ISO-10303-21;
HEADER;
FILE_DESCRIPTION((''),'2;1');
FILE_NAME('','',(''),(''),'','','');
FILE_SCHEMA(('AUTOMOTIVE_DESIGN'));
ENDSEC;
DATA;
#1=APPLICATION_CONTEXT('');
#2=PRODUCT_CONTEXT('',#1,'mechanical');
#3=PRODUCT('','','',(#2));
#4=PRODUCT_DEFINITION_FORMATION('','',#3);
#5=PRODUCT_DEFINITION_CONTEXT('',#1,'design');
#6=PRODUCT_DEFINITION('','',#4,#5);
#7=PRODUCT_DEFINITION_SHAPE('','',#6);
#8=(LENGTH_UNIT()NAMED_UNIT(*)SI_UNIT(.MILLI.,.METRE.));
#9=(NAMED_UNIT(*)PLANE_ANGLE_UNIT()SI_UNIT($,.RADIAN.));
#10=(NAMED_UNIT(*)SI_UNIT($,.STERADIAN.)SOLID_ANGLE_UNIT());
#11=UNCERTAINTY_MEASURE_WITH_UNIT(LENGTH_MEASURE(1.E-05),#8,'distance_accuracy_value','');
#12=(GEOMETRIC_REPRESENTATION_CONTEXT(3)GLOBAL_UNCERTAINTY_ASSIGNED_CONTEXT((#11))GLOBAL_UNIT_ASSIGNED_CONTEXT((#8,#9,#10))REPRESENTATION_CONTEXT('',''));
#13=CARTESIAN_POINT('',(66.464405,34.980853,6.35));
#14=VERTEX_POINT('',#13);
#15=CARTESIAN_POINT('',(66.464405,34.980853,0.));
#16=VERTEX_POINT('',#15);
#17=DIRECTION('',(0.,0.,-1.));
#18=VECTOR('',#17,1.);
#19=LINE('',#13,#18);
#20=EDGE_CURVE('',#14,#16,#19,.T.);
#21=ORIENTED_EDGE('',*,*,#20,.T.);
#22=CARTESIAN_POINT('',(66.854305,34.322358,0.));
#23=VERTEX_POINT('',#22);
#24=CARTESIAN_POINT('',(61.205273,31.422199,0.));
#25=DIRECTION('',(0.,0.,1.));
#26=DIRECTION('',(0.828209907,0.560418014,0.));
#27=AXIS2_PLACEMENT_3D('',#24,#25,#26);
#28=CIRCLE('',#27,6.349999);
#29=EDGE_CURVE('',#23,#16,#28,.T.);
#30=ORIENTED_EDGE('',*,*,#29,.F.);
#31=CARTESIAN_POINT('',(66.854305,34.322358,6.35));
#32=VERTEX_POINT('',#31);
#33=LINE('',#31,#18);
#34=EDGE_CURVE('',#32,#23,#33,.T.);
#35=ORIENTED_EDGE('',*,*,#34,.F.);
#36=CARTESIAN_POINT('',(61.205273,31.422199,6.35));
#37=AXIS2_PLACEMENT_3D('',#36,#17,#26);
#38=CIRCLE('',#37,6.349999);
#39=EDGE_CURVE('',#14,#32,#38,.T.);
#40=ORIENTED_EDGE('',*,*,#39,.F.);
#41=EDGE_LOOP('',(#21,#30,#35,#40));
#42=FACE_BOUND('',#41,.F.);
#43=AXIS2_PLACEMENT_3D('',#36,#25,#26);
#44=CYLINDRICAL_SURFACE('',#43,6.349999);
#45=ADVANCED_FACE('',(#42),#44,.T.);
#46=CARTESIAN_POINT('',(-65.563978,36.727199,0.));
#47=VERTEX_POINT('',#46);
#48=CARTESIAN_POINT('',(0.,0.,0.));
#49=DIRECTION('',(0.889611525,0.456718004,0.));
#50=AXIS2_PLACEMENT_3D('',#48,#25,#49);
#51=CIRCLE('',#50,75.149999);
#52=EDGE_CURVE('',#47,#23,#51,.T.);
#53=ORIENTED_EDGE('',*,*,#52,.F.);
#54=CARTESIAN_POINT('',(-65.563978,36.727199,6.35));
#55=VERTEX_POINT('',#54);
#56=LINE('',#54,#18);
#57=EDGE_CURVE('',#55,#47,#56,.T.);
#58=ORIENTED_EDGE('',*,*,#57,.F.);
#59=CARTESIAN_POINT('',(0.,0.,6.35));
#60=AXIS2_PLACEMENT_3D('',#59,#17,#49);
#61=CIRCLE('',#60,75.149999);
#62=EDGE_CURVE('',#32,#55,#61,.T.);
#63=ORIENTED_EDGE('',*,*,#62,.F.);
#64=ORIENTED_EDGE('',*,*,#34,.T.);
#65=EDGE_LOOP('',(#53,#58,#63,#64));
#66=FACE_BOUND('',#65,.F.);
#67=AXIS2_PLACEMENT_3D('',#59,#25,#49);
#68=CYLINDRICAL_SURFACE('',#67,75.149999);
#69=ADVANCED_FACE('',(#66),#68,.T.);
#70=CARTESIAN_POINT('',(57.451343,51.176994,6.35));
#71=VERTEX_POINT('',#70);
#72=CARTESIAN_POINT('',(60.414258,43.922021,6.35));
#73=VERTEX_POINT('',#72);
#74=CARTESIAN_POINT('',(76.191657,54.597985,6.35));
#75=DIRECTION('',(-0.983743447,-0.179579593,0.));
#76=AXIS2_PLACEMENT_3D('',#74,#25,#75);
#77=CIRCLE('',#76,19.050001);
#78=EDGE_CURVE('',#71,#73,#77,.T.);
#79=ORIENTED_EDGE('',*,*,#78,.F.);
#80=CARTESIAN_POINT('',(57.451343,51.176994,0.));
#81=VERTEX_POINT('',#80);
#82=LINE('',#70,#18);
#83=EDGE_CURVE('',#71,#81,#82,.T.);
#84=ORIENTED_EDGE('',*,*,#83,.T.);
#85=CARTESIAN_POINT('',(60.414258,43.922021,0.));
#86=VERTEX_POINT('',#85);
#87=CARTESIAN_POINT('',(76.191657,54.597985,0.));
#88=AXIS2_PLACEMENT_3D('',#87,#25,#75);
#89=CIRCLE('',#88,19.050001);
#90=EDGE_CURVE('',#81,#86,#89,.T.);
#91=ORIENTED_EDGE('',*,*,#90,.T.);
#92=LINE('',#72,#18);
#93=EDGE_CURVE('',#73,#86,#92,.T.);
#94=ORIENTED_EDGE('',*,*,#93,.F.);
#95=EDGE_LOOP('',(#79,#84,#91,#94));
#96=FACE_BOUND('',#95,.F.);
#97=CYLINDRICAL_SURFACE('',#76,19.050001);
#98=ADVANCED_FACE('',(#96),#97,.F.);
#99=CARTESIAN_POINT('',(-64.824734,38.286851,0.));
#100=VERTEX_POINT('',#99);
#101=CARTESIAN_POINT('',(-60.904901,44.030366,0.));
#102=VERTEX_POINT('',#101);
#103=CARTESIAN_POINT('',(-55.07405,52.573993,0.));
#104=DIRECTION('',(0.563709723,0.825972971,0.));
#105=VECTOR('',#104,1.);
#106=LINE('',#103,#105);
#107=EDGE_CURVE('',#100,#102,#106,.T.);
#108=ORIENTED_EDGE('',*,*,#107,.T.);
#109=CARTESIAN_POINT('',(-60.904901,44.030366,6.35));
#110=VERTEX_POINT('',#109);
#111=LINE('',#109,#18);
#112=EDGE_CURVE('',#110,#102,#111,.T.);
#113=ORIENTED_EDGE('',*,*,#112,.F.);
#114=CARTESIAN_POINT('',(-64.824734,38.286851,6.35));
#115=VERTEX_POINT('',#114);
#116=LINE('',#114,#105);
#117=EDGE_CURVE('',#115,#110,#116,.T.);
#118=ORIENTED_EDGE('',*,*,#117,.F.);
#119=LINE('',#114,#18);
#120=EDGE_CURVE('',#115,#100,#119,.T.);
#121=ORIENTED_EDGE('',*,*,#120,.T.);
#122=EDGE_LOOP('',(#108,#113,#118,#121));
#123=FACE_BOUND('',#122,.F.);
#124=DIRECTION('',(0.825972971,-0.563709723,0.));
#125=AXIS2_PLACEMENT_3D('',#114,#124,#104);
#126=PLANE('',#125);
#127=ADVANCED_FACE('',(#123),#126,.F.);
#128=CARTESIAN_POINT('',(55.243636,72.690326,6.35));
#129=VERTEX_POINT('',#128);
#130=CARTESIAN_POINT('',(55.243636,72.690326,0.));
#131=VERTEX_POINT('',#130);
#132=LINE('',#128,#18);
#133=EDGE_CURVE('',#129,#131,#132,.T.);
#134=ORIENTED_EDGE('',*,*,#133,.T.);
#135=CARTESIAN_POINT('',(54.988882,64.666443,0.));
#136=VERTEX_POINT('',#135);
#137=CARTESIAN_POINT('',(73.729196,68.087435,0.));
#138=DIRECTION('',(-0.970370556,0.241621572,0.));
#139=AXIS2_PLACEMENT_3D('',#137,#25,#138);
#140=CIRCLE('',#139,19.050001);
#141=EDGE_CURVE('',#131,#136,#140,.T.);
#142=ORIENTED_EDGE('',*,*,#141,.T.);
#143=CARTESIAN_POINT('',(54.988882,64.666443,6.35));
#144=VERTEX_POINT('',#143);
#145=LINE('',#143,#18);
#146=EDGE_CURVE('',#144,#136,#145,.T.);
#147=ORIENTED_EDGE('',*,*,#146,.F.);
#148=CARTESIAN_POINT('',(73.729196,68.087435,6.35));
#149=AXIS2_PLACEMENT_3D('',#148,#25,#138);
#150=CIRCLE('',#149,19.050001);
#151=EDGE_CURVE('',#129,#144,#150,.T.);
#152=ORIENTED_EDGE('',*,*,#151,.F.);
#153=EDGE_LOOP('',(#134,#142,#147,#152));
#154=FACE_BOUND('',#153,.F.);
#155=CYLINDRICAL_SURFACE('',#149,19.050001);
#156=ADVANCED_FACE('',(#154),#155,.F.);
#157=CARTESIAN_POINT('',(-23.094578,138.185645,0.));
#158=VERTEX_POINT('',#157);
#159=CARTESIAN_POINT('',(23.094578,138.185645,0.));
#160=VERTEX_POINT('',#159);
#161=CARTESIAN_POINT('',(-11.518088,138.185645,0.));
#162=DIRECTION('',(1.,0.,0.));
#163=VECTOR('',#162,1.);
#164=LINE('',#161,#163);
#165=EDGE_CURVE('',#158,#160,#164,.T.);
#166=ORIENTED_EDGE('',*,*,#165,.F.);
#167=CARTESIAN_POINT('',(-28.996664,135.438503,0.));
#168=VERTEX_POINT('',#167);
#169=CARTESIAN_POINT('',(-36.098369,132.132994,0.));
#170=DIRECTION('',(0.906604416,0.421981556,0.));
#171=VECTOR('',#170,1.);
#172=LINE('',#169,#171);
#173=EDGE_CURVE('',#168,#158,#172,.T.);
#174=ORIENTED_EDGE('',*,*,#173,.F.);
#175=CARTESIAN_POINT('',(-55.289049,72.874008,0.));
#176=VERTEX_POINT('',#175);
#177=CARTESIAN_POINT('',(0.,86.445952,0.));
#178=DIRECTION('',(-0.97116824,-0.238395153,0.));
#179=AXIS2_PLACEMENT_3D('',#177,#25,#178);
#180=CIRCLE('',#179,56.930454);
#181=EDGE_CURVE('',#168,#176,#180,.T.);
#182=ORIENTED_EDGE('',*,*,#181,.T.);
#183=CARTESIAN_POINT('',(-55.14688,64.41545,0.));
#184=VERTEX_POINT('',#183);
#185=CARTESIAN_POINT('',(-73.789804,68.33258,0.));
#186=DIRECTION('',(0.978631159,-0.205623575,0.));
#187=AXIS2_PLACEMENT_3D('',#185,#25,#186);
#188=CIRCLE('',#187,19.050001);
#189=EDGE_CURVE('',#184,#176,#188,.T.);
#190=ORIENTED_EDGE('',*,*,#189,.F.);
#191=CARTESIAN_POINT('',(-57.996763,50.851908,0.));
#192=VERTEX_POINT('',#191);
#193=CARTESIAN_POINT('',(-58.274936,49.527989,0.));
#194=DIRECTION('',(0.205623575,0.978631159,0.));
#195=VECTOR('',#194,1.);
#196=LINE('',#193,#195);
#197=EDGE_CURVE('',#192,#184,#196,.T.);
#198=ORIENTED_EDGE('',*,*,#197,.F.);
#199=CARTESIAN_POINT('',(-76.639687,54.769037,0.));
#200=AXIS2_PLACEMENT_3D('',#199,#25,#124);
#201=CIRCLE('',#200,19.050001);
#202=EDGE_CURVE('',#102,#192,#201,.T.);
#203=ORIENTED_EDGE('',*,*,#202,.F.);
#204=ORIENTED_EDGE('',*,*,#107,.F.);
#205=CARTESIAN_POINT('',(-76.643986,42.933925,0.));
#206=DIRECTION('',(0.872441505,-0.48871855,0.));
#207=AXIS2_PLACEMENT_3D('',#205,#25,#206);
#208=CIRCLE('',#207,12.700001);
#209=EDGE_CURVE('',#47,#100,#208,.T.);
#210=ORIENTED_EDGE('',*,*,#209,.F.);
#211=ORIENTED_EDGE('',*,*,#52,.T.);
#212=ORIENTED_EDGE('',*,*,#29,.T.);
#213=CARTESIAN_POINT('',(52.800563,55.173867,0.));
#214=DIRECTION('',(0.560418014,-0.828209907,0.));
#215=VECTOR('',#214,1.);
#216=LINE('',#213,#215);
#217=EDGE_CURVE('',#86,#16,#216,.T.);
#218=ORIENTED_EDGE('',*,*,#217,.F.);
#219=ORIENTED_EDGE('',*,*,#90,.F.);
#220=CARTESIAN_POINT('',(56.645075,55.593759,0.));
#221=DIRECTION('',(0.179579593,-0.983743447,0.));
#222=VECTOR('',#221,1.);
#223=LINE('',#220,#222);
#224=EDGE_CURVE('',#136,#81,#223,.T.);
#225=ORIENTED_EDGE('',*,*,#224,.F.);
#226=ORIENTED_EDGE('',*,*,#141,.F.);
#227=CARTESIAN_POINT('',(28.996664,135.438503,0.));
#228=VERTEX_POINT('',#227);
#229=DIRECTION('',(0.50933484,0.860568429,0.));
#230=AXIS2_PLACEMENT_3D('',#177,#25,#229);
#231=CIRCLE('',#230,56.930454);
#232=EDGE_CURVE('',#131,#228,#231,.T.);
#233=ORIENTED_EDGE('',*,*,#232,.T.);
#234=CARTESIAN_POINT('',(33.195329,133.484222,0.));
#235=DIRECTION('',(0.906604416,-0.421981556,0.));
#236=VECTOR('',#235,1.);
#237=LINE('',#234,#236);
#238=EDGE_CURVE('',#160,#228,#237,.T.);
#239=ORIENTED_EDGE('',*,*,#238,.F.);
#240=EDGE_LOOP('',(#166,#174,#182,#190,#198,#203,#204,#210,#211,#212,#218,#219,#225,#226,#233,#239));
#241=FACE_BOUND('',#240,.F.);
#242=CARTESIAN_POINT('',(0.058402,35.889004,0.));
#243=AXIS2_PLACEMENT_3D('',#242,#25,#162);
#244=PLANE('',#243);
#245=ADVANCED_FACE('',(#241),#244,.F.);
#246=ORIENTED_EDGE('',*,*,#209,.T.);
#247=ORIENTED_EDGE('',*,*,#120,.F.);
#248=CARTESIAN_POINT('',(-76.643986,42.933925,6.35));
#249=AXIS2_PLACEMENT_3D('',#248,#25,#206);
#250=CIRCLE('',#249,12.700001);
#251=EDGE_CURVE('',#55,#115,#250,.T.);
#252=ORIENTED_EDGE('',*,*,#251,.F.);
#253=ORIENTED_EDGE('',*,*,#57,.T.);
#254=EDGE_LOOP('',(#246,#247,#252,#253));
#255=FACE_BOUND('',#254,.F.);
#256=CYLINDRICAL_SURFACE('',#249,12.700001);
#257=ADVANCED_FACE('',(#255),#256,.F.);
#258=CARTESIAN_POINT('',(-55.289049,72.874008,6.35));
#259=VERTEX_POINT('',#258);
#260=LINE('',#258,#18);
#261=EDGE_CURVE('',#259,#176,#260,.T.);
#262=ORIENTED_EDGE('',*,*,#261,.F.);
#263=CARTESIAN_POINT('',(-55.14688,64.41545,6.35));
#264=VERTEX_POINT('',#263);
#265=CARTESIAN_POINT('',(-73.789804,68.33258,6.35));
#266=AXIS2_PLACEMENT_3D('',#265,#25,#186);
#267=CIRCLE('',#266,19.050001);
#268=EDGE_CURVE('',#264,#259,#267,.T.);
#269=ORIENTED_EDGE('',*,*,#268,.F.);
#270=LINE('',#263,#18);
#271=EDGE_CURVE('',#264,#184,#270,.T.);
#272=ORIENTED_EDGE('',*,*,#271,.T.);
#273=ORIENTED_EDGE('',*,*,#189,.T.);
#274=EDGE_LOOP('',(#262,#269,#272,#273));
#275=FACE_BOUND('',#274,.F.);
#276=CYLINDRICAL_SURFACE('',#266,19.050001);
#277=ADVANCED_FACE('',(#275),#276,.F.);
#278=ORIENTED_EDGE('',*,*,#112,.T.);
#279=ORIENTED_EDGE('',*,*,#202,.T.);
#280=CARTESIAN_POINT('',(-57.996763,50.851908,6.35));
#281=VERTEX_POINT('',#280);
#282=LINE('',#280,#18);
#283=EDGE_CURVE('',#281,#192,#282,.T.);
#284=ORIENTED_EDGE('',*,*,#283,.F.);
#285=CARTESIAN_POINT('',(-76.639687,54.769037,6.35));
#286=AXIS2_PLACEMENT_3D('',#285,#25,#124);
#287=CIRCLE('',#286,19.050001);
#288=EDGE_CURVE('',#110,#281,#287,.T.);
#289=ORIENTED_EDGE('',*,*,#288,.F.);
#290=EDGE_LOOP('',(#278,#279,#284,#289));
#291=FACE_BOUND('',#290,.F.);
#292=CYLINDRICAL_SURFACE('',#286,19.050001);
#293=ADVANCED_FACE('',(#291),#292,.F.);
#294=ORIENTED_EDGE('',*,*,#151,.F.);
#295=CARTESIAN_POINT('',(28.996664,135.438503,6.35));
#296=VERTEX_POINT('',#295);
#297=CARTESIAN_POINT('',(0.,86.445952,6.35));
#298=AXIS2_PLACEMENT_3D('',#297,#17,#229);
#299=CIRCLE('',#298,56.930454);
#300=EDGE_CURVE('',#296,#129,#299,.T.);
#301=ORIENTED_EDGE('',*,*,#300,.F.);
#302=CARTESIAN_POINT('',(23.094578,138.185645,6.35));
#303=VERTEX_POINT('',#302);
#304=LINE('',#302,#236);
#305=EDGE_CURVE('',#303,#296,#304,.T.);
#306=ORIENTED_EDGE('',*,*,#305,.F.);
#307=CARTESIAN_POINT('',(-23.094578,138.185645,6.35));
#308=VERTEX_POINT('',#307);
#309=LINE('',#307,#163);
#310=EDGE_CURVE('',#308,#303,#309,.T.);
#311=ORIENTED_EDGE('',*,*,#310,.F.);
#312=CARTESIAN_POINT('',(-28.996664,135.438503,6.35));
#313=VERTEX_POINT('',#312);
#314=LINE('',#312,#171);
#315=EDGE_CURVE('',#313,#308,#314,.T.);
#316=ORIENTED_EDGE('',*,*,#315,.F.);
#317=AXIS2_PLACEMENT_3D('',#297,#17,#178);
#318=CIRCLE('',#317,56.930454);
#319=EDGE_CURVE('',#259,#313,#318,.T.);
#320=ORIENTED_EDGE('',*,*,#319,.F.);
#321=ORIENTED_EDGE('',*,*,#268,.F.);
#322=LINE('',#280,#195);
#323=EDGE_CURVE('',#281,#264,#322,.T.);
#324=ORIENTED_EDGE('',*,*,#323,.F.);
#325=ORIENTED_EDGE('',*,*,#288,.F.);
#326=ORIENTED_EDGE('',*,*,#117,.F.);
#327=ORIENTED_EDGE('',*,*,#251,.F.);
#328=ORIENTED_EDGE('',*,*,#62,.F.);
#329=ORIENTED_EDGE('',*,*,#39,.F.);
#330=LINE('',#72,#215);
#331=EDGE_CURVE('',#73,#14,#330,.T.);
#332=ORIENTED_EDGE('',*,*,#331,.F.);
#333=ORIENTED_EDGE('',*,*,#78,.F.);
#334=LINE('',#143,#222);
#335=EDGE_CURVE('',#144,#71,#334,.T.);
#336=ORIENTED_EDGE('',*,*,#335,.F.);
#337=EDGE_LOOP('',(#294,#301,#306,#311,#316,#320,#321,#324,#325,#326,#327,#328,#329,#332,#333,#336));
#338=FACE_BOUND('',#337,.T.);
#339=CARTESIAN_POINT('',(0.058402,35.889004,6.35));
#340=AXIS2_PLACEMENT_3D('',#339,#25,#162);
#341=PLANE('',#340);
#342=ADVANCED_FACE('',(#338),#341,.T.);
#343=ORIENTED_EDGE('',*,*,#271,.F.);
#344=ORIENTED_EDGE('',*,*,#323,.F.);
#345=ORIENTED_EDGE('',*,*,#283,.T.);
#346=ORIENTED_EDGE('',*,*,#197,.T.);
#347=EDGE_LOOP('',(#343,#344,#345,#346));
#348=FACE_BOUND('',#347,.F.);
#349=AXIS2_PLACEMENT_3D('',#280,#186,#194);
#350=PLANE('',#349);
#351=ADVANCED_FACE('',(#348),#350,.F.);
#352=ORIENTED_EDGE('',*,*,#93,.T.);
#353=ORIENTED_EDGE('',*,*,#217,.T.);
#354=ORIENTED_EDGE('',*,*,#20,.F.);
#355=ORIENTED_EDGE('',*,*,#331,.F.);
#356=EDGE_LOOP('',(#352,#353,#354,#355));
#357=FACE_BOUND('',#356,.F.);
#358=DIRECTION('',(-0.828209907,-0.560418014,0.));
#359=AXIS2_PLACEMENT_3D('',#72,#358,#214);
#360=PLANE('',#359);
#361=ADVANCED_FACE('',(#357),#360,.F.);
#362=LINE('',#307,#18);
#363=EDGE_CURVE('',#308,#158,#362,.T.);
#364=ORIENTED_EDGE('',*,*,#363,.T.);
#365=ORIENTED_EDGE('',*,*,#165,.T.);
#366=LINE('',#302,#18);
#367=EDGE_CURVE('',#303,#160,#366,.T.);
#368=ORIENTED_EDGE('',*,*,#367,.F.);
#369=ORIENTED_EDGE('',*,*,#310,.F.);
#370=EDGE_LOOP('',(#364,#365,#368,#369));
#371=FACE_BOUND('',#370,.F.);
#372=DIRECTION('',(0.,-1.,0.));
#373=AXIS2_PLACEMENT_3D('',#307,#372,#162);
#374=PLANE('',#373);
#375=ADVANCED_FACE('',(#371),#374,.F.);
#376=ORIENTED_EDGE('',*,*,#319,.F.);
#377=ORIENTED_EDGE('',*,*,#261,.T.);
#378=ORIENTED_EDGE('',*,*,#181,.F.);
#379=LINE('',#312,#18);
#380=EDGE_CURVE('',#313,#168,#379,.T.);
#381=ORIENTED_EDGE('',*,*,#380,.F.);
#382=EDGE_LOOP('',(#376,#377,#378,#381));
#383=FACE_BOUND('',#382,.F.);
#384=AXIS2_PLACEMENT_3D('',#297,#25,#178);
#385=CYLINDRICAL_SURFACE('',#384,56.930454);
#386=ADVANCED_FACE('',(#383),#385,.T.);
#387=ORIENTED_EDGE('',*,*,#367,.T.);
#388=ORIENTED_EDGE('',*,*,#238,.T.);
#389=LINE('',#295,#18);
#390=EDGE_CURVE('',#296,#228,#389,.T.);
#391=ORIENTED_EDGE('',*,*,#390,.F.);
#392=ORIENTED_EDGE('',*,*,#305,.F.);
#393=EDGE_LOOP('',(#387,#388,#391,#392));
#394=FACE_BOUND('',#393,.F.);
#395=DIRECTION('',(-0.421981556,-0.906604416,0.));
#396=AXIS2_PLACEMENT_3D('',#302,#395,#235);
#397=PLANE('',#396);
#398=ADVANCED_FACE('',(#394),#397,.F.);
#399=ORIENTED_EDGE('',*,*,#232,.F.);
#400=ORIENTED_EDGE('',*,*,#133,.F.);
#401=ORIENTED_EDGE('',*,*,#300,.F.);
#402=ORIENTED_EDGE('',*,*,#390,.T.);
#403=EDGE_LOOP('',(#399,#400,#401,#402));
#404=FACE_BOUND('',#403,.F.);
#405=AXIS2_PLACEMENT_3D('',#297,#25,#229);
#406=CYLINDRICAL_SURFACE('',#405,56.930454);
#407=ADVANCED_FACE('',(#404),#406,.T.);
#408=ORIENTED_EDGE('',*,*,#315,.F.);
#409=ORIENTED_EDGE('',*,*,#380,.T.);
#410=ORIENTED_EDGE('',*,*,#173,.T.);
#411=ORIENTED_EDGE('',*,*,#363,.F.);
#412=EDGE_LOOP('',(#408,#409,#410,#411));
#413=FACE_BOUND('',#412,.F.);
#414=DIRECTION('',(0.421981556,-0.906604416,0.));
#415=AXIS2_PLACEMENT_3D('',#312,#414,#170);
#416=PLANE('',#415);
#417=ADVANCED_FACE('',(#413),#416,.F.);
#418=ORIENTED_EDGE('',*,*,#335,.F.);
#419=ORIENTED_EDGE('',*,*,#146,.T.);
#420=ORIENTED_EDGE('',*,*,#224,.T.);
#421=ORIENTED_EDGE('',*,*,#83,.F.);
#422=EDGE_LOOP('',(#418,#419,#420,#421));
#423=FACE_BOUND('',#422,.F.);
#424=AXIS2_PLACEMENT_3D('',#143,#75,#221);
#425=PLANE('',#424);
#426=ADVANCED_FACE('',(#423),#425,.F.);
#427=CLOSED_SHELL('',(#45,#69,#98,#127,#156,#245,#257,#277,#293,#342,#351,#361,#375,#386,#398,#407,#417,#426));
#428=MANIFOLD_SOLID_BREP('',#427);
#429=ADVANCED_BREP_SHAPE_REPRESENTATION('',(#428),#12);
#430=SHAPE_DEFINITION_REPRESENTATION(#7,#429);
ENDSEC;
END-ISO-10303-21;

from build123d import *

# Parameters (mm, degrees)
F1_DEPTH = 6.35
F2_R     = 12.7
F4_DEPTH = 6.351


# Not quite as in the source:
# - a feature names something its author has since deleted; it is built from what else it names


with BuildPart() as f1:
    # F0 (on Top) → F1 (new body)
    with BuildSketch(Plane.XY):
        with BuildLine():
            ThreePointArc((-70.543128599, 41.1726645916), (-70.7849997477, 40.4855010306), (-71.1039826136, 39.8305618399))
            ThreePointArc((-71.1039826136, 39.8305618399), (-1.0804242799, -81.4928382336), (72.1349447987, 37.9315137965))
            Line((72.1349447987, 37.9315137965), (64.1774671745, 49.691417374))
            Line((64.1774671745, 49.691417374), (60.7204563849, 68.6290463558))
            ThreePointArc((60.7204563849, 68.6290463558), (58.8124253174, 109.8022050591), (31.9532798351, 141.0664959374))
            Line((31.9532798352, 141.0664959374), (24.5, 144.5356458426))
            Line((24.5, 144.5356458426), (0, 144.5356458426))
            Line((0, 144.5356458426), (-24.5, 144.5356458426))
            Line((-24.5, 144.5356458426), (-31.9532798352, 141.0664959374))
            ThreePointArc((-31.9532798351, 141.0664959374), (-58.8010464391, 109.8308374249), (-60.7377773112, 68.688183064))
            Line((-60.7377773112, 68.688183064), (-64.7292534015, 49.691417374))
            Line((-64.7292534015, 49.691417374), (-70.543128599, 41.1726645916))
        make_face()
    extrude(amount=F1_DEPTH)

    # F2
    f2_edges = [f1.edges().sort_by_distance(p)[0] for p in [
        (60.720456, 68.629046, 3.175),
        (72.134945, 37.931514, 3.175),
        (64.177467, 49.691417, 3.175),
        (-64.729253, 49.691417, 3.175),
        (-60.737777, 68.688183, 3.175),
    ]]
    fillet(f2_edges, radius=F2_R)

    # F3 (on face) → F4 (cut, through all)
    with BuildSketch(Plane.XY.offset(6.35)):
        with BuildLine():
            ThreePointArc((-70.543128599, 41.1726645916), (-70.7849997477, 40.4855010306), (-71.1039826136, 39.8305618399))
            ThreePointArc((-71.1039826136, 39.8305618399), (-1.4798729053, -81.4865631634), (72.5033392644, 37.2225173183))
            ThreePointArc((72.5033392644, 37.2225173183), (72.133296657, 37.8927702646), (71.7235387193, 38.5395074414))
            Line((71.7235387193, 38.5395074414), (65.673391241, 47.4806762809))
            ThreePointArc((65.673391241, 47.4806762809), (64.4343566454, 49.7963304465), (63.6981152819, 52.3173242185))
            Line((63.6981152819, 52.3173242185), (61.235654247, 65.8067740057))
            ThreePointArc((61.235654247, 65.8067740057), (61.0355921512, 68.4904493527), (61.4054899639, 71.1560288055))
            ThreePointArc((61.4054899639, 71.1560288055), (58.3166642414, 111.0138701005), (31.9532798351, 141.0664959374))
            Line((31.9532798352, 141.0664959374), (24.5, 144.5356458426))
            Line((24.5, 144.5356458426), (-24.5, 144.5356458426))
            Line((-24.5, 144.5356458426), (-31.9532798352, 141.0664959374))
            ThreePointArc((-31.9532798351, 141.0664959374), (-58.2757571875, 111.1107457801), (-61.4559677961, 71.3601980865))
            ThreePointArc((-61.4559677961, 71.3601980865), (-61.0915979292, 68.5460068659), (-61.3611887293, 65.7211602459))
            Line((-61.3611887293, 65.7211602459), (-64.2110715476, 52.1576176071))
            ThreePointArc((-64.2110715476, 52.1576176071), (-64.9570302406, 49.7885224974), (-66.149830538, 47.6099235298))
            Line((-66.149830538, 47.6099235298), (-70.543128599, 41.1726645916))
        make_face()
        with BuildLine():
            Line((-28.9966635349, 135.438502816), (-23.0945782645, 138.1856448808))
            Line((-23.0945782645, 138.1856448808), (23.0945782645, 138.1856448808))
            Line((23.0945782645, 138.1856448808), (28.9966635349, 135.438502816))
            ThreePointArc((28.9966635349, 135.438502816), (52.520857183, 108.4149325541), (55.243636, 72.6903260202))
            ThreePointArc((55.243636, 72.6903260202), (54.6887892531, 68.6919566393), (54.988882412, 64.6664434155))
            Line((54.988882412, 64.6664434155), (57.4513434469, 51.1769936283))
            ThreePointArc((57.4513434469, 51.1769936283), (58.5557055478, 47.3955027794), (60.4142575351, 43.9220213556))
            Line((60.4142575351, 43.9220213556), (66.4644050134, 34.9808525161))
            ThreePointArc((66.4644050134, 34.9808525161), (66.6692839512, 34.6574839767), (66.8543052269, 34.3223575543))
            ThreePointArc((66.8543052269, 34.3223575543), (-1.3645699068, -75.137609121), (-65.5639782212, 36.7271985762))
            ThreePointArc((-65.5639782212, 36.7271985762), (-65.1678300151, 37.4944518277), (-64.8247337429, 38.2868506548))
            Line((-64.8247337429, 38.2868506548), (-60.904901379, 44.0303662485))
            ThreePointArc((-60.904901379, 44.0303662485), (-59.1157008425, 47.2982648647), (-57.9967627465, 50.8519077088))
            Line((-57.9967627465, 50.8519077088), (-55.1468799282, 64.4154503476))
            ThreePointArc((-55.1468799282, 64.4154503476), (-54.7424937077, 68.6527204915), (-55.2890485355, 72.8740075355))
            ThreePointArc((-55.2890485355, 72.8740075355), (-52.4842770002, 108.5021804525), (-28.9966635349, 135.438502816))
        make_face(mode=Mode.SUBTRACT)
    extrude(amount=-F4_DEPTH, mode=Mode.SUBTRACT)


solid = f1.part
